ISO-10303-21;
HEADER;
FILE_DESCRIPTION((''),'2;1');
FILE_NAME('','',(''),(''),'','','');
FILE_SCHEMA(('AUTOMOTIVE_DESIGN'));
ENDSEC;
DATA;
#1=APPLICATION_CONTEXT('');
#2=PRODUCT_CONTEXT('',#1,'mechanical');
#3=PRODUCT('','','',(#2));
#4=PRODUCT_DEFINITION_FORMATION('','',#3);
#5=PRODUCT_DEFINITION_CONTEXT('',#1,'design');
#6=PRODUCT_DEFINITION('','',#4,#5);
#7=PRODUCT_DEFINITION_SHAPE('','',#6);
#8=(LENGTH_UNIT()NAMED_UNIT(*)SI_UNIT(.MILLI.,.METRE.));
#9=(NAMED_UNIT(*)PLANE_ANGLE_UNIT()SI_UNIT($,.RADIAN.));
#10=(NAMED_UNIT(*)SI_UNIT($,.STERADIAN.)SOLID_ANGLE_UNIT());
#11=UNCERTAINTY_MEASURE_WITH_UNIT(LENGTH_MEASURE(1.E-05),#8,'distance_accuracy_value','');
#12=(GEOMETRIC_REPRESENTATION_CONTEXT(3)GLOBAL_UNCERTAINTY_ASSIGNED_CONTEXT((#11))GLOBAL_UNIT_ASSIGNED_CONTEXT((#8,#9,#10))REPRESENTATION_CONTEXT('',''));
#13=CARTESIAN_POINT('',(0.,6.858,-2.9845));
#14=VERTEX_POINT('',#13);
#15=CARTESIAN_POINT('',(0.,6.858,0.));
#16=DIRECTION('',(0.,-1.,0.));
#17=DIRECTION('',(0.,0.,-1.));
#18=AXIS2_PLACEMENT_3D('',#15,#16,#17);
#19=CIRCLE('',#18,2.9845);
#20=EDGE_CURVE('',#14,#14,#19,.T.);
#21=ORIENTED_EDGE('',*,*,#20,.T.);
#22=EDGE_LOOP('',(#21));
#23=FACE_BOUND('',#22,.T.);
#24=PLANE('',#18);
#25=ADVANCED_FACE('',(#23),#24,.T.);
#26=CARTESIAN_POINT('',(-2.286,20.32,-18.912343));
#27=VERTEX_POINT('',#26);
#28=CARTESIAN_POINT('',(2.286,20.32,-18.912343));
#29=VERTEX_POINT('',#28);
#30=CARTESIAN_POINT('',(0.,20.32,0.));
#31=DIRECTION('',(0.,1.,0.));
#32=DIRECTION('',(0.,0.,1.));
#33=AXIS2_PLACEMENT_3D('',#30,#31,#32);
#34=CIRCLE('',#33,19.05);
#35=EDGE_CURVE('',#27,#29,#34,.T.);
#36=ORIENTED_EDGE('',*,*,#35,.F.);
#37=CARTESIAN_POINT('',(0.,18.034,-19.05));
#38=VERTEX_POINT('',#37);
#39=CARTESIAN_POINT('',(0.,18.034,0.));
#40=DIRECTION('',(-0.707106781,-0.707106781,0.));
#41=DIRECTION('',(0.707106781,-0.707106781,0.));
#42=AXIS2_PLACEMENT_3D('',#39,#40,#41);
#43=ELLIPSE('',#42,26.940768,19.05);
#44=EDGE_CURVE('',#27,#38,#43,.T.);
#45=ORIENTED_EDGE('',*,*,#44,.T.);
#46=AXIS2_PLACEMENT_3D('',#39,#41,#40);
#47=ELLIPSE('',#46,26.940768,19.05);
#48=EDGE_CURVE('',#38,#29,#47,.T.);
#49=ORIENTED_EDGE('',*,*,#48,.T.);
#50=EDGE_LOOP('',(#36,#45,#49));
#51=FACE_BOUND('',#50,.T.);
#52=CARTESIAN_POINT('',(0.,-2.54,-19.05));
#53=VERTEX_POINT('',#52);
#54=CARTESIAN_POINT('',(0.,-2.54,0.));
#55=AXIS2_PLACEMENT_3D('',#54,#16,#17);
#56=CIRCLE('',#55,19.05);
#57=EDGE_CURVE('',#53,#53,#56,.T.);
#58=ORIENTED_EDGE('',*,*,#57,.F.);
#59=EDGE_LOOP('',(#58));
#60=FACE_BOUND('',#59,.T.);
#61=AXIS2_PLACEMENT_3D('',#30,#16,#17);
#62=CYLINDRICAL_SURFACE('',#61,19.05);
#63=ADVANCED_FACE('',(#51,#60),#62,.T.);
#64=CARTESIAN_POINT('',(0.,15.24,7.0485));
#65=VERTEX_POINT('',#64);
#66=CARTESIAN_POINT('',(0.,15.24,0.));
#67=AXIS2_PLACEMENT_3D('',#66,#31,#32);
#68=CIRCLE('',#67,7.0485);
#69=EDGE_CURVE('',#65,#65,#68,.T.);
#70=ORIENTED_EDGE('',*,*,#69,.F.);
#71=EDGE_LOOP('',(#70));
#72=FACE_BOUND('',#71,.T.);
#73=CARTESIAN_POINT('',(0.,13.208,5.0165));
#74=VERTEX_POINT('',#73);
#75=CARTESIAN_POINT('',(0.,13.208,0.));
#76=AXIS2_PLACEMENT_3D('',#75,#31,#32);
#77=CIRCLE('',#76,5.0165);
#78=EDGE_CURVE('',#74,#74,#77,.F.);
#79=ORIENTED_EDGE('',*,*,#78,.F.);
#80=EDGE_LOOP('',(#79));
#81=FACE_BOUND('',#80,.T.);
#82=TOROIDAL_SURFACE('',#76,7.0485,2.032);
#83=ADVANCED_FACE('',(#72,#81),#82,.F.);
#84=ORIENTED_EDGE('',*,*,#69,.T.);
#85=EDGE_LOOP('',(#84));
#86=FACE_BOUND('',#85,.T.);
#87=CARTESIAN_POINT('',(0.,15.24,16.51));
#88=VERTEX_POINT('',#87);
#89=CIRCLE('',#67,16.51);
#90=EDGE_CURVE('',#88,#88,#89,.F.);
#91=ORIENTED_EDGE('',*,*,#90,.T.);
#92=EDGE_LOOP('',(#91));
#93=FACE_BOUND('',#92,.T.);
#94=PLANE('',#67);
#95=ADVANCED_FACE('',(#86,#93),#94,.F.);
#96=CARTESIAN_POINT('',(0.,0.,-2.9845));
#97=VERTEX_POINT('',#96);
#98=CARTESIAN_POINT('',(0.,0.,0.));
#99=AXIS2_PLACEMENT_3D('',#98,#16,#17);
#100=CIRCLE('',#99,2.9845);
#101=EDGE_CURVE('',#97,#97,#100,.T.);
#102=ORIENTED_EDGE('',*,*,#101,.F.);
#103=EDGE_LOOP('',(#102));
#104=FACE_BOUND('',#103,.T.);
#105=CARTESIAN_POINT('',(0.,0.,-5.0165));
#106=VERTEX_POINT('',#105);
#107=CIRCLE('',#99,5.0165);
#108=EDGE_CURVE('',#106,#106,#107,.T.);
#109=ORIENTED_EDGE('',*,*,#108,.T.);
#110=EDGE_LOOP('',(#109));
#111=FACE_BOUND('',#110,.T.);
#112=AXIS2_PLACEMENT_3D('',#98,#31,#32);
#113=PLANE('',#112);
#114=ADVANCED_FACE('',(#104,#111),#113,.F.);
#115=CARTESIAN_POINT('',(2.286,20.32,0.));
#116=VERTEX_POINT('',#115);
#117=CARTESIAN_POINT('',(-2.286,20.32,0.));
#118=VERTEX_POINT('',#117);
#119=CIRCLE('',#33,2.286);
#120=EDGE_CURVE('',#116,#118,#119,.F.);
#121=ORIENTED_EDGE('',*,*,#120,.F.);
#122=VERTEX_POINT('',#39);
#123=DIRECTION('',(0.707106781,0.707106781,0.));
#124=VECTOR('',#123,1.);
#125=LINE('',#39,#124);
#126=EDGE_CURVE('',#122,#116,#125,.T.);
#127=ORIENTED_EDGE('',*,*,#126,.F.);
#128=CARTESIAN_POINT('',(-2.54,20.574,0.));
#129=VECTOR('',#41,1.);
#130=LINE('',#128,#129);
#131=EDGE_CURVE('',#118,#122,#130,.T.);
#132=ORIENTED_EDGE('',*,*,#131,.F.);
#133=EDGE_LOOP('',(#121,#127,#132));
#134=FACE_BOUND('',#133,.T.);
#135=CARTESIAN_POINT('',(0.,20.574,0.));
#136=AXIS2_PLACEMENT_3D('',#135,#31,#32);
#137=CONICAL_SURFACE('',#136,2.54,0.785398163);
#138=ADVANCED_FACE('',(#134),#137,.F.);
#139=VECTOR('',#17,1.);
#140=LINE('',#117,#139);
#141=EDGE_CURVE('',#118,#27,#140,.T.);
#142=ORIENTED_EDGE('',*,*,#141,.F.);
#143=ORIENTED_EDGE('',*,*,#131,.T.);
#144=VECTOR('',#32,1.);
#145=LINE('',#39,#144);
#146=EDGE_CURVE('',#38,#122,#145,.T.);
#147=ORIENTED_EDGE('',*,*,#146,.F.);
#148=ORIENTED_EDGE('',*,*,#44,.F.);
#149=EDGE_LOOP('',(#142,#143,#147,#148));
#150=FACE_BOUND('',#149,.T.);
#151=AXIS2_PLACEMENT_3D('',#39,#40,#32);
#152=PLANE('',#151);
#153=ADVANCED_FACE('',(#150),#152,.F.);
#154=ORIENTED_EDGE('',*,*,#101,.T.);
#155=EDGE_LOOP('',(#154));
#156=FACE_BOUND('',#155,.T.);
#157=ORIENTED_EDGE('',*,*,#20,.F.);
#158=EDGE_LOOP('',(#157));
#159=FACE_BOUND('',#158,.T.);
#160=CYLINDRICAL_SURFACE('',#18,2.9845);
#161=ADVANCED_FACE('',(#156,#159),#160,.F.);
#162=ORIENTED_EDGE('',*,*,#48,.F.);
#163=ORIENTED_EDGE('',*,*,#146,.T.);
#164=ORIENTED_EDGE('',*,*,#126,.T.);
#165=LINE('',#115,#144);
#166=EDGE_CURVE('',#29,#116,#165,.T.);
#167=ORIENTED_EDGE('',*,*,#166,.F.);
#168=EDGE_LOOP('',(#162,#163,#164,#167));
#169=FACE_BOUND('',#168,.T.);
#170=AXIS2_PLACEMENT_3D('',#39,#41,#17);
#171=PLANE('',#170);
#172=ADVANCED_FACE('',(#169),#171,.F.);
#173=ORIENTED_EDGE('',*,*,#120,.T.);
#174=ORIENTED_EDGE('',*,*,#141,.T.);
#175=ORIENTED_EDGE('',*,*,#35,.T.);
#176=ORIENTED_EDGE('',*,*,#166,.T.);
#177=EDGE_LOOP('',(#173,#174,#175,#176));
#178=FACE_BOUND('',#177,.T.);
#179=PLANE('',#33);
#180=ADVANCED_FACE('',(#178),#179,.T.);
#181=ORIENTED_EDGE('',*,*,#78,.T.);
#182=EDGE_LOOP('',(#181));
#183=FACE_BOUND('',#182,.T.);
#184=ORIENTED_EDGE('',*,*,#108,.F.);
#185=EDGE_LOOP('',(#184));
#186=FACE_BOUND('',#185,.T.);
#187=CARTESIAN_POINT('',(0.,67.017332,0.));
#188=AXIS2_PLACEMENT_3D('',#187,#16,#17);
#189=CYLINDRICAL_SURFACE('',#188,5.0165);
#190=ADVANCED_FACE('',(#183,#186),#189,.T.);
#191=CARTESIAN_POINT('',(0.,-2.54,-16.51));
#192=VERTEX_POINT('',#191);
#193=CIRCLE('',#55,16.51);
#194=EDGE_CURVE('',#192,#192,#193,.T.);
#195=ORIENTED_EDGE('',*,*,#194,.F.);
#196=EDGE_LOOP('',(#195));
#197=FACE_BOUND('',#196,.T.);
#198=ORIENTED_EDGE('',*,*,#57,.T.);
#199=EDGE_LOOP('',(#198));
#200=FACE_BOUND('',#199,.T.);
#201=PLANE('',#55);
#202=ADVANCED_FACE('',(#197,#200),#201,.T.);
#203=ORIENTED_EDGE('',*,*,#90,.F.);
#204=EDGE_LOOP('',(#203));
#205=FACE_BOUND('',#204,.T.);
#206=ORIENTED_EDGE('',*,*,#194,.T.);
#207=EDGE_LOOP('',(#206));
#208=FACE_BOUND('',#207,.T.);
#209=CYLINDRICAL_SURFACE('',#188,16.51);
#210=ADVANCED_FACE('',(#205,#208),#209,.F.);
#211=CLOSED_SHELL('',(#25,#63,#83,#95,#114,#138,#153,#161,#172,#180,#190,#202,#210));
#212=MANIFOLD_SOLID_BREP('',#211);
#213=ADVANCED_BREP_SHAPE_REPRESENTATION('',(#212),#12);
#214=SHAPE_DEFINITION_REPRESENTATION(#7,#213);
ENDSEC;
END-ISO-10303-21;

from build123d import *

# Parameters (mm, degrees)
SKETCH1_R           = 19.05
BOSS_EXTRUDE1_DEPTH = 20.32
SKETCH2_R           = 2.9845
CUT_EXTRUDE1_DEPTH  = 6.858
SKETCH3_R           = 16.51
SKETCH3_R_2         = 5.0165
CUT_EXTRUDE2_DEPTH  = 15.24
FILLET1_R           = 2.032
CUT_EXTRUDE3_START  = -2.286
CUT_EXTRUDE3_DEPTH  = 2.286
CHAMFER1_SIZE       = 2.54
BOSS_EXTRUDE2_START = 2.54
SKETCH6_R           = 19.05
SKETCH6_R_2         = 16.51
BOSS_EXTRUDE2_DEPTH = 2.54


with BuildPart() as part:
    # Sketch1 → Boss-Extrude1 (new body)
    with BuildSketch(Plane(origin=(0, 0, 0), x_dir=(1, 0, 0), z_dir=(0, 1, 0))):
        with Locations(Location((0, 0, 0), (0, 0, 270))):
            Circle(SKETCH1_R)
    extrude(amount=BOSS_EXTRUDE1_DEPTH)

    # Sketch2 → Cut-Extrude1 (cut)
    with BuildSketch(Plane(origin=(0, 0, 0), x_dir=(-1, 0, 0), z_dir=(0, -1, 0))):
        with Locations(Location((0, 0, 0), (0, 0, 90))):
            Circle(SKETCH2_R)
    extrude(amount=-CUT_EXTRUDE1_DEPTH, mode=Mode.SUBTRACT)

    # Sketch3 → Cut-Extrude2 (cut)
    with BuildSketch(Plane.XZ):
        with Locations(Location((0, 0, 0), (0, 0, 270))):
            Circle(SKETCH3_R)
        with Locations(Location((0, 0, 0), (0, 0, 270))):
            Circle(SKETCH3_R_2, mode=Mode.SUBTRACT)
    extrude(amount=-CUT_EXTRUDE2_DEPTH, mode=Mode.SUBTRACT)

    # Fillet1
    fillet1_edges = [part.edges().sort_by_distance(p)[0] for p in [
        (0, 15.24, 5.0165),
    ]]
    fillet(fillet1_edges, radius=FILLET1_R)

    # Sketch4 → Cut-Extrude3 (cut)
    with BuildSketch(Plane(origin=(0, 20.32, 0), x_dir=(1, 0, 0), z_dir=(0, 1, 0)).offset(CUT_EXTRUDE3_START)):
        with BuildLine():
            Line((-2.54, 0), (-2.54, 18.879907309))
            ThreePointArc((-2.54, 18.879907309), (0, 19.05), (2.54, 18.879907309))
            Line((2.54, 18.879907309), (2.54, 0))
            ThreePointArc((2.54, 0), (0, -2.54), (-2.54, 0))
        make_face()
    extrude(amount=CUT_EXTRUDE3_DEPTH, mode=Mode.SUBTRACT)

    # Chamfer1
    # the kernel refuses this chamfer: 2.54 mm, written as the material it adds along each edge
    with BuildSketch(Plane(origin=(2.54, 18.034, -25.411982099), x_dir=(-1, 0, 0), z_dir=(0, 0, 1))) as chamfer1_piece_1_section:
        Polygon((CHAMFER1_SIZE, 0), (0, -CHAMFER1_SIZE), (0, 0), align=None)
    chamfer1_piece_1 = extrude(amount=25.411982099, mode=Mode.PRIVATE)
    chamfer1_piece_1 = chamfer1_piece_1 & Plane(origin=(0, 18.034, 0), x_dir=(0, 0, 1), z_dir=(0, -1, 0)) * Cylinder(19.05, 61, mode=Mode.PRIVATE)
    chamfer1_piece_1 = split(chamfer1_piece_1, bisect_by=Plane(origin=(2.54, 20.32, -25.411982099), z_dir=(0, -1, 0)), keep=Keep.TOP, mode=Mode.PRIVATE)
    add(chamfer1_piece_1)
    with BuildSketch(Plane(origin=(0, 18.034, 0), x_dir=(1, 0, 0), z_dir=(0, 0, -1))) as chamfer1_piece_2_section:
        Polygon((2.54 - CHAMFER1_SIZE, 0), (2.54, -CHAMFER1_SIZE), (2.54, 0), align=None)
    chamfer1_piece_2 = revolve(axis=Axis((0, 18.034, 0), (0, -1, 0)), revolution_arc=180, mode=Mode.PRIVATE)
    chamfer1_piece_2 = split(chamfer1_piece_2, bisect_by=Plane(origin=(0, 20.32, 0), z_dir=(0, -1, 0)), keep=Keep.TOP, mode=Mode.PRIVATE)
    add(chamfer1_piece_2)
    with BuildSketch(Plane(origin=(-2.54, 18.034, 0), x_dir=(0, 1, 0), z_dir=(0, 0, -1))) as chamfer1_piece_3_section:
        Polygon((CHAMFER1_SIZE, 0), (0, CHAMFER1_SIZE), (0, 0), align=None)
    chamfer1_piece_3 = extrude(amount=25.411982099, mode=Mode.PRIVATE)
    chamfer1_piece_3 = chamfer1_piece_3 & Plane(origin=(0, 18.034, 0), x_dir=(0, 0, 1), z_dir=(0, -1, 0)) * Cylinder(19.05, 61, mode=Mode.PRIVATE)
    chamfer1_piece_3 = split(chamfer1_piece_3, bisect_by=Plane(origin=(-2.54, 20.32, 0), z_dir=(0, -1, 0)), keep=Keep.TOP, mode=Mode.PRIVATE)
    add(chamfer1_piece_3)

    # Sketch6 → Boss-Extrude2 (add)
    with BuildSketch(Plane.XZ.offset(BOSS_EXTRUDE2_START)):
        with Locations(Location((0, 0, 0), (0, 0, 270))):
            Circle(SKETCH6_R)
        with Locations(Location((0, 0, 0), (0, 0, 270))):
            Circle(SKETCH6_R_2, mode=Mode.SUBTRACT)
    extrude(amount=-BOSS_EXTRUDE2_DEPTH)


solid = part.part
